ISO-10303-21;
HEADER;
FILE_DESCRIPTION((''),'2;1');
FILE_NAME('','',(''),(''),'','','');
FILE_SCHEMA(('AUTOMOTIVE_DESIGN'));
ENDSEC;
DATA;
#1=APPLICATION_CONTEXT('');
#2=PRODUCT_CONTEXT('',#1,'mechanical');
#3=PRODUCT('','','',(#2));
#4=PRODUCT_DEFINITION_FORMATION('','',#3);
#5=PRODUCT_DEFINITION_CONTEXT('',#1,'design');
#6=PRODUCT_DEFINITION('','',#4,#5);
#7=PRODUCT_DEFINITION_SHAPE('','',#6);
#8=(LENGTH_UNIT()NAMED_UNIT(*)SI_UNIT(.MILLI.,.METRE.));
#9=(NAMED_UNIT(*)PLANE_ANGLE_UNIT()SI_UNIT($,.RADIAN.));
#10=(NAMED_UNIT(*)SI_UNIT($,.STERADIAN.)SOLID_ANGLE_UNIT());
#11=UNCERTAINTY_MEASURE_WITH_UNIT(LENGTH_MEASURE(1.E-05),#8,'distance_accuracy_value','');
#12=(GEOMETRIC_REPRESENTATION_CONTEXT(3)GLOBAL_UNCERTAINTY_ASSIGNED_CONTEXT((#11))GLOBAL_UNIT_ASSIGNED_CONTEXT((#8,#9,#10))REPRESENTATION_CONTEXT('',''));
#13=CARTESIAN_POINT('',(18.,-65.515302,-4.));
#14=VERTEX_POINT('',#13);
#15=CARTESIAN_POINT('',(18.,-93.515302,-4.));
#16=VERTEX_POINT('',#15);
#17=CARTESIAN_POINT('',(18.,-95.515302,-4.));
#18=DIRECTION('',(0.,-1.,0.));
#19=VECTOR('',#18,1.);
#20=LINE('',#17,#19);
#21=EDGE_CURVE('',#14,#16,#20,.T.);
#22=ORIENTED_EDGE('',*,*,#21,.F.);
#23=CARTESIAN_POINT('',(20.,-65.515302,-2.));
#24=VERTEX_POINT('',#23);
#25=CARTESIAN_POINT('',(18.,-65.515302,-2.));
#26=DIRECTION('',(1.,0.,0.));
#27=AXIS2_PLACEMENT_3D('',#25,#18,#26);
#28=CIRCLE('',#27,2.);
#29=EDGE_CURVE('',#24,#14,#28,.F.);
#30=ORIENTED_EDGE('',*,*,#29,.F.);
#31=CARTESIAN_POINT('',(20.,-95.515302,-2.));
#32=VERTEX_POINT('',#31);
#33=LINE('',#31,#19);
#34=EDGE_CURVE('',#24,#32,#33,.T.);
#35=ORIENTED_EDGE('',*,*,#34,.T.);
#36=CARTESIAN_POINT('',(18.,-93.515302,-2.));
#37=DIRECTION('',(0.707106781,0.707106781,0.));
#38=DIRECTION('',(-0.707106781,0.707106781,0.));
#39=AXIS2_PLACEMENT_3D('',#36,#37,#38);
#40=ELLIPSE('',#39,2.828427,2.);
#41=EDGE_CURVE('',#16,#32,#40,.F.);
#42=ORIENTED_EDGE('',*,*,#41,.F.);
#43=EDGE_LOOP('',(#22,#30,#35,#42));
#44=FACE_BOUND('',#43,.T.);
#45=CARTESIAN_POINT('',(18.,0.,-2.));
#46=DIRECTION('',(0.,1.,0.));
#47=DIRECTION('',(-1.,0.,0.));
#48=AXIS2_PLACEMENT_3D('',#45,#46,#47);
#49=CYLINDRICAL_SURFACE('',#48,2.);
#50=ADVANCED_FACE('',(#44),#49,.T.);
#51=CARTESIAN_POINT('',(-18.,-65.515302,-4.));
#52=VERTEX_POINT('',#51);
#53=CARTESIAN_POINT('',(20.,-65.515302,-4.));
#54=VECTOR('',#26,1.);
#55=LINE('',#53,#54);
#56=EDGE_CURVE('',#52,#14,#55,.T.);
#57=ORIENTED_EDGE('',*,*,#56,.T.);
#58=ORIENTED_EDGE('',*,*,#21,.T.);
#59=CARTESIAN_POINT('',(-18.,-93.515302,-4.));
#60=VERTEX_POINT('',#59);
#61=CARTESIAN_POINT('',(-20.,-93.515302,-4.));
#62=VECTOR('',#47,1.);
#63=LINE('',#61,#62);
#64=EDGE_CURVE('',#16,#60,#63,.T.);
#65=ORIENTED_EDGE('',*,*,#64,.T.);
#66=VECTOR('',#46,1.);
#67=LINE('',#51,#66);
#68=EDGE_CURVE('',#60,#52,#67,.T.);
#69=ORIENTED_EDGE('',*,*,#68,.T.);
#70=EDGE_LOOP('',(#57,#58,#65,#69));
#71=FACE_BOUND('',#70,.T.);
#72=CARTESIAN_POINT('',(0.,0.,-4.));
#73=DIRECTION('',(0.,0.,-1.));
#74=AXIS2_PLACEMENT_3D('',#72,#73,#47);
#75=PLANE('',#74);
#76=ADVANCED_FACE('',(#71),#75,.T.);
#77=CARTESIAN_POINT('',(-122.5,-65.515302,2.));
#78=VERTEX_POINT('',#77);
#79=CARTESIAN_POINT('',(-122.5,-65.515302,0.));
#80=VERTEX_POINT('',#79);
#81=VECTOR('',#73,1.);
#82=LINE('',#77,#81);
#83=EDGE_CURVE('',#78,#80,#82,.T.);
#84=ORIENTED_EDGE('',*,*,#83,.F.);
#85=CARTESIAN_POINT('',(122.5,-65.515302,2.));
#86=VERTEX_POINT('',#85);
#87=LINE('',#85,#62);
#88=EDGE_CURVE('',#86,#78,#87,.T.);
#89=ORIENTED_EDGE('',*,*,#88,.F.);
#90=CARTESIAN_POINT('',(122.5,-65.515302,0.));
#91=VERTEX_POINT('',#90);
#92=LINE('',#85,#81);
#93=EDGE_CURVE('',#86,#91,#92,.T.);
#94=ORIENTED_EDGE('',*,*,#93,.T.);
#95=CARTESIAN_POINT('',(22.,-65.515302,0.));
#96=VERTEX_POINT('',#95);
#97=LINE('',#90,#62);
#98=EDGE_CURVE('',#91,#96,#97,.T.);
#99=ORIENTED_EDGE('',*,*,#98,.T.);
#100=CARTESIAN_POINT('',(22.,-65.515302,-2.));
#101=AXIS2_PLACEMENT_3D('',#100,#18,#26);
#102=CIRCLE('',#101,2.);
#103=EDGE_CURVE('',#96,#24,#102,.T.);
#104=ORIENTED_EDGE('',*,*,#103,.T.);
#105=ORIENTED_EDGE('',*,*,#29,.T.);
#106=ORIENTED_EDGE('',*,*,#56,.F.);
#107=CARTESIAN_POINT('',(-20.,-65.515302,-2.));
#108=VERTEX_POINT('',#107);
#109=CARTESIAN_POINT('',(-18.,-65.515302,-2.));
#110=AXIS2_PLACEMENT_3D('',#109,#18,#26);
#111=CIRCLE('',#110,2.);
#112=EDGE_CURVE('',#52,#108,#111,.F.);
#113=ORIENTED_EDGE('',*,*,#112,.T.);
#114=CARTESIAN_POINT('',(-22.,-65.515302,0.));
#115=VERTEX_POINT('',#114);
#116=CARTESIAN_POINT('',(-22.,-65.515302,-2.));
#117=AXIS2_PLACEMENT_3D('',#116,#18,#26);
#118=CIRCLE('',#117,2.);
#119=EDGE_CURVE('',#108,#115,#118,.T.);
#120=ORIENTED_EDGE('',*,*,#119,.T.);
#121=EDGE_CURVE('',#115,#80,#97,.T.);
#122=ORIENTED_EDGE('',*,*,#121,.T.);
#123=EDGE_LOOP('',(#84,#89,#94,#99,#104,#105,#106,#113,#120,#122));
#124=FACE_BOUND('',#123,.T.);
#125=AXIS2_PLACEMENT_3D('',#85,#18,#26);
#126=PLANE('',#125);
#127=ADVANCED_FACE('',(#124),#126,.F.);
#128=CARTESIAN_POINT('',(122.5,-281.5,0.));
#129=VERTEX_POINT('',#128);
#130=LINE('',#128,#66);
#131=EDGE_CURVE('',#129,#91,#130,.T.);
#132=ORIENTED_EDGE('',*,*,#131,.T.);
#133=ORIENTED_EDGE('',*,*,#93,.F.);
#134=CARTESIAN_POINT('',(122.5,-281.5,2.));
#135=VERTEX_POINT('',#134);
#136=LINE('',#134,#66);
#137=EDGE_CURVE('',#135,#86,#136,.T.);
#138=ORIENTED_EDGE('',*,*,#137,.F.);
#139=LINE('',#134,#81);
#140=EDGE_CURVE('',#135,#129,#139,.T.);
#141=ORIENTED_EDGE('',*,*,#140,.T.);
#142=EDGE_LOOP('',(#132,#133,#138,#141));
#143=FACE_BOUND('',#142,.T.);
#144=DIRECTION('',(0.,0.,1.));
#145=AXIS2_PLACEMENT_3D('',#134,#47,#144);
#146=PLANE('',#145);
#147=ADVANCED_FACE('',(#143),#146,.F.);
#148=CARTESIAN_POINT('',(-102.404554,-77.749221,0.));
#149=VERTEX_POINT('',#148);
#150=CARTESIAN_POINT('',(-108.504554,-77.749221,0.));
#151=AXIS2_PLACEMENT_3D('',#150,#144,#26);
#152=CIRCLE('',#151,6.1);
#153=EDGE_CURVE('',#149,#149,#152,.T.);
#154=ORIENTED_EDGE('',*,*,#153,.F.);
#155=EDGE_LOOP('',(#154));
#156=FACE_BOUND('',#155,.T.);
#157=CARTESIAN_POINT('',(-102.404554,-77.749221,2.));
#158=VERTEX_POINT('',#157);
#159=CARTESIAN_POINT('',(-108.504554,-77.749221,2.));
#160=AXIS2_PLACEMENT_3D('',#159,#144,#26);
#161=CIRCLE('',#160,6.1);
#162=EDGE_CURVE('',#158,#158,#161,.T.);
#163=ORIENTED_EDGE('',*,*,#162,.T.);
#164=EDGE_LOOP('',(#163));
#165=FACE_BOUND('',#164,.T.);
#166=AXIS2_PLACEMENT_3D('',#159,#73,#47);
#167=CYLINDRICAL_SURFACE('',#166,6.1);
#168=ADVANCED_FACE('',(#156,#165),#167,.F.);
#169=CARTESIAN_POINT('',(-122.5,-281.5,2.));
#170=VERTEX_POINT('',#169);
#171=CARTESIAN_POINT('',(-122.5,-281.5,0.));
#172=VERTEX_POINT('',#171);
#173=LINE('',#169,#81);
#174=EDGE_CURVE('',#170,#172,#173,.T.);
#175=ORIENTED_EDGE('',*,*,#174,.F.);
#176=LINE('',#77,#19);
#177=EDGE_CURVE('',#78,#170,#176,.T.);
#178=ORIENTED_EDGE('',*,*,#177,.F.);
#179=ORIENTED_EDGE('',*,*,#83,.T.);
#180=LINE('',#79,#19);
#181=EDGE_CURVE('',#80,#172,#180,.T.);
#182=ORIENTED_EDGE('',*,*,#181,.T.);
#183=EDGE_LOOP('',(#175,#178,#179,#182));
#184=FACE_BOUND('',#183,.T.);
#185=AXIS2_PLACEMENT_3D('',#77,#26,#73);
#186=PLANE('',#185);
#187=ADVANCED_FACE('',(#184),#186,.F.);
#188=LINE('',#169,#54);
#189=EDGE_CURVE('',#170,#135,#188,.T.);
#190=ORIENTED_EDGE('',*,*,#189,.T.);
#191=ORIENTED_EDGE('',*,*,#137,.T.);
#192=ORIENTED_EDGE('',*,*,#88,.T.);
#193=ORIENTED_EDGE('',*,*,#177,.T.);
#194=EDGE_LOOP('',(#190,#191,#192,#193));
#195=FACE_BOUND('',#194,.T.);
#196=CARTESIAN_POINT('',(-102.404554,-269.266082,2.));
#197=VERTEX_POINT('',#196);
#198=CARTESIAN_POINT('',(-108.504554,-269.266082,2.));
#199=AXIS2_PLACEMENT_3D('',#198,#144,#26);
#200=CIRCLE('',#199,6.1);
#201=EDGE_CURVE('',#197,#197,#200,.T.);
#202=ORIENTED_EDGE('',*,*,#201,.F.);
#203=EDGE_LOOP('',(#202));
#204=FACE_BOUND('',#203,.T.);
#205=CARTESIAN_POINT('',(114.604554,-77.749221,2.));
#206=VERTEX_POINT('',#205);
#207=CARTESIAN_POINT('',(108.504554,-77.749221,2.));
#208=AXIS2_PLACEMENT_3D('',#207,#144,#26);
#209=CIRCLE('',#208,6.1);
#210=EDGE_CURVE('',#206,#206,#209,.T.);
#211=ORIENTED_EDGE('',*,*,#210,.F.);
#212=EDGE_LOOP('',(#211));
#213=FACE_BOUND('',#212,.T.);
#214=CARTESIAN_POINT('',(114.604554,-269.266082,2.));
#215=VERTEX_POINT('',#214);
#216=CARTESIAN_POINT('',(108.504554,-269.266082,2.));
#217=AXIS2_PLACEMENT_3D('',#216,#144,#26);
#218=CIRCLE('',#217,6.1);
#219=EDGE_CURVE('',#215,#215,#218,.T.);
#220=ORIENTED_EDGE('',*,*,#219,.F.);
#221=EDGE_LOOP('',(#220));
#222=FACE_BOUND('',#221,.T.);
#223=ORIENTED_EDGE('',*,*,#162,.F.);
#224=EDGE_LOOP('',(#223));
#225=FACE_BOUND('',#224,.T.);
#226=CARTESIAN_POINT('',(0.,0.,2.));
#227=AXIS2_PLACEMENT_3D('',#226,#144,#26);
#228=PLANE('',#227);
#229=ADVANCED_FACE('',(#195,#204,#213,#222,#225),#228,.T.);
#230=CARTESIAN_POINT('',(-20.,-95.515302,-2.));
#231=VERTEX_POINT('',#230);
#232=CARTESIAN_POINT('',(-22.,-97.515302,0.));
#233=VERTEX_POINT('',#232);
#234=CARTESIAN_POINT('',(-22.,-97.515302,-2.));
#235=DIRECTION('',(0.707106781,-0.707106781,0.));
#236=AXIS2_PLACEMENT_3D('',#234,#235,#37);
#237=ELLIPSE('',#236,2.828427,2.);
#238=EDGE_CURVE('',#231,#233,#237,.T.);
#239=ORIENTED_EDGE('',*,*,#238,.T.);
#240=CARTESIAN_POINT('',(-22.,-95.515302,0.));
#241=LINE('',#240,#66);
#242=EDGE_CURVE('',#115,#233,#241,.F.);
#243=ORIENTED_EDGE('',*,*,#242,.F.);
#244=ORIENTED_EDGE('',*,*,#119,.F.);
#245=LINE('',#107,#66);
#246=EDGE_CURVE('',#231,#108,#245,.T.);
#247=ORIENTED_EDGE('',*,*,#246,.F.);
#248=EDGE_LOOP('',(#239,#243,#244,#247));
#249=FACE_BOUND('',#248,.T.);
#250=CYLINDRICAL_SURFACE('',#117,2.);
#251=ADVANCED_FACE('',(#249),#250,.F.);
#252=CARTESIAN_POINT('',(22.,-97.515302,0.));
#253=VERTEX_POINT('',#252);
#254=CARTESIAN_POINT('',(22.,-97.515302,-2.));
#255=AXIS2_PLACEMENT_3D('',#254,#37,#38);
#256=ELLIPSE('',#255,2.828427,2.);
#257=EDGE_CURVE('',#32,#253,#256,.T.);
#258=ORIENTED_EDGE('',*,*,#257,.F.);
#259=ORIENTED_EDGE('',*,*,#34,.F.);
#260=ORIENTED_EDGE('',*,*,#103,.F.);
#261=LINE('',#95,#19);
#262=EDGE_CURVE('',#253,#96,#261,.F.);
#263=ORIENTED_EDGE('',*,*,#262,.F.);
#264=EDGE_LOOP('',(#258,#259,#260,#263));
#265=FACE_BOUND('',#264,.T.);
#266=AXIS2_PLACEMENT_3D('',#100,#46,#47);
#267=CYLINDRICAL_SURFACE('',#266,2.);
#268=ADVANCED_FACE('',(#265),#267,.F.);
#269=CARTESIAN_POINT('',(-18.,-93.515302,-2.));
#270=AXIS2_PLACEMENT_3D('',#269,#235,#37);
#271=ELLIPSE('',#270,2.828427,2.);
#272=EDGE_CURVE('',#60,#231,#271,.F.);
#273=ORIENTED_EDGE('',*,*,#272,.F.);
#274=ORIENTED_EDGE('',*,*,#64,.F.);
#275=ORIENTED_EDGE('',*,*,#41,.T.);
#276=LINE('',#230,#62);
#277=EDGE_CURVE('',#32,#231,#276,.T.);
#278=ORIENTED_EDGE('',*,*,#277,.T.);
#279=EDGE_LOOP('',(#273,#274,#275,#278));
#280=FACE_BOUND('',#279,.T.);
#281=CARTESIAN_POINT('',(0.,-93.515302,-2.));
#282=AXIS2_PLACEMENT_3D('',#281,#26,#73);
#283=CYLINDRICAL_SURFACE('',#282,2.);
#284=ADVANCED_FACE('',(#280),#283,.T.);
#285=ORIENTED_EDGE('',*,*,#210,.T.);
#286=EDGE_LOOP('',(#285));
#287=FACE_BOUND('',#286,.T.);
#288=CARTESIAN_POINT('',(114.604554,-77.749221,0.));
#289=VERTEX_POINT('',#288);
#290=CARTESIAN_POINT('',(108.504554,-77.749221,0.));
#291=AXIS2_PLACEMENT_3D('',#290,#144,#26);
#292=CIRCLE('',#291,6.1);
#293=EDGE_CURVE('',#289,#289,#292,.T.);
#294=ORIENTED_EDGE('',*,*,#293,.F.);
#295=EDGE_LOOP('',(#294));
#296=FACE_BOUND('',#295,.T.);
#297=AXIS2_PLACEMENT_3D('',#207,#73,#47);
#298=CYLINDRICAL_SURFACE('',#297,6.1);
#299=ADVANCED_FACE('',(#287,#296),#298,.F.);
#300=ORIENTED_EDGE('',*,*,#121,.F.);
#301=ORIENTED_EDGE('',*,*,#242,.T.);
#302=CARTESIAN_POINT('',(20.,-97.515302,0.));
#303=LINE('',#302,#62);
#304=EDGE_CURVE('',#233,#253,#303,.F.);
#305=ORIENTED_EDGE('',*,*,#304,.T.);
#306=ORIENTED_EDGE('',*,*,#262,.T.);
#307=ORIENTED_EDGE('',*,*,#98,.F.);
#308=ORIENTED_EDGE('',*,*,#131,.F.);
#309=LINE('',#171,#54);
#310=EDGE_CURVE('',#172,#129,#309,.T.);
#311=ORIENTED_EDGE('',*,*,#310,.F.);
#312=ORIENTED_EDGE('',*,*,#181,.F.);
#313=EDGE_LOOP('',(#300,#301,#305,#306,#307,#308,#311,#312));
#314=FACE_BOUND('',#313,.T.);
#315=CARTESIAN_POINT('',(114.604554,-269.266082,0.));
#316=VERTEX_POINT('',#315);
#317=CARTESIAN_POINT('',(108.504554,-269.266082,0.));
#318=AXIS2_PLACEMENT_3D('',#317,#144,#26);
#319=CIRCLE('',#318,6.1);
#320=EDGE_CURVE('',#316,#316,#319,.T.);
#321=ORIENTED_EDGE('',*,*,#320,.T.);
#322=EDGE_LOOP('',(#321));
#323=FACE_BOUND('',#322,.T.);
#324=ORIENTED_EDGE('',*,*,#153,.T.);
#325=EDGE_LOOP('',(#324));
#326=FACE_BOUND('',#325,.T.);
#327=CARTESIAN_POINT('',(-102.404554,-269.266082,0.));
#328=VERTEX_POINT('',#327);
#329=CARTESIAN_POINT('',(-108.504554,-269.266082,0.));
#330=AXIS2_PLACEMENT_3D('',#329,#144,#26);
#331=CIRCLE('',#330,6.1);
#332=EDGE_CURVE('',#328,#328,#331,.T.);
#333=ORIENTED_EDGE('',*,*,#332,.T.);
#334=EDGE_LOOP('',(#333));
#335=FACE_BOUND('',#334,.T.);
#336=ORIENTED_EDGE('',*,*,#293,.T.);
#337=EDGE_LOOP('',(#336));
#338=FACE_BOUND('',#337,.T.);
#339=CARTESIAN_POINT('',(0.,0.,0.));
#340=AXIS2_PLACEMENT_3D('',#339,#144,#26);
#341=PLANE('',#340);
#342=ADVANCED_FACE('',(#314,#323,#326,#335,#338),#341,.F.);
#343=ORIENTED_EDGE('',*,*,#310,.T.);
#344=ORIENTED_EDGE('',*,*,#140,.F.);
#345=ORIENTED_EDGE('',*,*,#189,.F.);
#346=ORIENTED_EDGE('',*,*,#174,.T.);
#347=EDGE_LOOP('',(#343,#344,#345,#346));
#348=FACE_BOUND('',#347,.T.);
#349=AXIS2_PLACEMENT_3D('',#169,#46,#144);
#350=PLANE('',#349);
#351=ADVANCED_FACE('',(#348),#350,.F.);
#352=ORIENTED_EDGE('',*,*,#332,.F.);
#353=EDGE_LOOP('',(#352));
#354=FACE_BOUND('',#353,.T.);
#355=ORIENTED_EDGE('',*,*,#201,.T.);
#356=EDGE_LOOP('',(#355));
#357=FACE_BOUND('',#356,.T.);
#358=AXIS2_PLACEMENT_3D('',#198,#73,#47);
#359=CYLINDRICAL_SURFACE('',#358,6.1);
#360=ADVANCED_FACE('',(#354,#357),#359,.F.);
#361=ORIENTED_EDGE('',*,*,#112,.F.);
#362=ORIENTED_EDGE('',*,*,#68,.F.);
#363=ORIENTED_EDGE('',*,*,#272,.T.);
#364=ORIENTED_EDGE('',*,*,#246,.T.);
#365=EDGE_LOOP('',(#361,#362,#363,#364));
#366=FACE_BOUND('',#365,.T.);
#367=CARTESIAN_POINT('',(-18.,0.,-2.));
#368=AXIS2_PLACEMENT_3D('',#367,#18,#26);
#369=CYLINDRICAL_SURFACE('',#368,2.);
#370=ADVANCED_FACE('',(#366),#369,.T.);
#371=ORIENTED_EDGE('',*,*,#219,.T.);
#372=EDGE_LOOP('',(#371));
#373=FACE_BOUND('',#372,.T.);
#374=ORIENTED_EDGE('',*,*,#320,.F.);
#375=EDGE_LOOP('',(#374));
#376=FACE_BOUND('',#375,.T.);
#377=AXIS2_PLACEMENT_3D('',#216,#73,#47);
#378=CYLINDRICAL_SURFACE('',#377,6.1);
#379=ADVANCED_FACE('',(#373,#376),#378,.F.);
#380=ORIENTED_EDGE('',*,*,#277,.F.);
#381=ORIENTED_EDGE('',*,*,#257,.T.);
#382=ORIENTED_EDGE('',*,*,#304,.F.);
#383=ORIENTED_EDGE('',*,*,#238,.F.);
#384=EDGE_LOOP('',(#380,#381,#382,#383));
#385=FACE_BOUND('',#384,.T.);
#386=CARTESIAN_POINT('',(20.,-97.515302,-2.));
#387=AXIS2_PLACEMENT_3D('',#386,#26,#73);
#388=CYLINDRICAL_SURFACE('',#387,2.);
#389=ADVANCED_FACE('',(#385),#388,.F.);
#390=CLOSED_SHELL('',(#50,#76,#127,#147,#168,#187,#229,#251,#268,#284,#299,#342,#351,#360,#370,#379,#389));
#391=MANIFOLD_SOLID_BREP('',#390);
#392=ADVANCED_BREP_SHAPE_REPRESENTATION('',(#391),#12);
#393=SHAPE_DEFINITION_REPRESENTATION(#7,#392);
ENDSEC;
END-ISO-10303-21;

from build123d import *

# Parameters (mm, degrees)
CROQUIS1_W              = 245
CROQUIS1_H              = 215.984697531
CROQUIS1_R              = 6.1
SALIENTE_EXTRUIR1_DEPTH = 2
CROQUIS2_W              = 40
CROQUIS2_H              = 30
SALIENTE_EXTRUIR2_DEPTH = 4
REDONDEO1_R             = 2


with BuildPart() as part:
    # Croquis1 → Saliente-Extruir1 (new body)
    with BuildSketch(Plane.XY):
        with Locations((0, -173.507651235)):
            Rectangle(CROQUIS1_W, CROQUIS1_H)
        with Locations((-108.504553774, -269.266081741)):
            Circle(CROQUIS1_R, mode=Mode.SUBTRACT)
        with Locations((108.504553774, -269.266081741)):
            Circle(CROQUIS1_R, mode=Mode.SUBTRACT)
        with Locations((108.504553774, -77.749220728)):
            Circle(CROQUIS1_R, mode=Mode.SUBTRACT)
        with Locations((-108.504553774, -77.749220728)):
            Circle(CROQUIS1_R, mode=Mode.SUBTRACT)
    extrude(amount=SALIENTE_EXTRUIR1_DEPTH)

    # Croquis2 → Saliente-Extruir2 (add)
    with BuildSketch(Plane(origin=(0, 0, 0), x_dir=(-1, 0, 0), z_dir=(0, 0, -1))):
        with Locations((0, -80.515302469)):
            Rectangle(CROQUIS2_W, CROQUIS2_H)
    extrude(amount=SALIENTE_EXTRUIR2_DEPTH)

    # Redondeo1
    redondeo1_edges = [part.edges().sort_by_distance(p)[0] for p in [
        (-20, -80.515302469, -4),
        (-20, -80.515302469, 0),
        (0, -95.515302469, 0),
        (20, -80.515302469, 0),
        (0, -95.515302469, -4),
        (20, -80.515302469, -4),
    ]]
    fillet(redondeo1_edges, radius=REDONDEO1_R - 0.0001)  # a hair under: the kernel refuses the full size


solid = part.part
